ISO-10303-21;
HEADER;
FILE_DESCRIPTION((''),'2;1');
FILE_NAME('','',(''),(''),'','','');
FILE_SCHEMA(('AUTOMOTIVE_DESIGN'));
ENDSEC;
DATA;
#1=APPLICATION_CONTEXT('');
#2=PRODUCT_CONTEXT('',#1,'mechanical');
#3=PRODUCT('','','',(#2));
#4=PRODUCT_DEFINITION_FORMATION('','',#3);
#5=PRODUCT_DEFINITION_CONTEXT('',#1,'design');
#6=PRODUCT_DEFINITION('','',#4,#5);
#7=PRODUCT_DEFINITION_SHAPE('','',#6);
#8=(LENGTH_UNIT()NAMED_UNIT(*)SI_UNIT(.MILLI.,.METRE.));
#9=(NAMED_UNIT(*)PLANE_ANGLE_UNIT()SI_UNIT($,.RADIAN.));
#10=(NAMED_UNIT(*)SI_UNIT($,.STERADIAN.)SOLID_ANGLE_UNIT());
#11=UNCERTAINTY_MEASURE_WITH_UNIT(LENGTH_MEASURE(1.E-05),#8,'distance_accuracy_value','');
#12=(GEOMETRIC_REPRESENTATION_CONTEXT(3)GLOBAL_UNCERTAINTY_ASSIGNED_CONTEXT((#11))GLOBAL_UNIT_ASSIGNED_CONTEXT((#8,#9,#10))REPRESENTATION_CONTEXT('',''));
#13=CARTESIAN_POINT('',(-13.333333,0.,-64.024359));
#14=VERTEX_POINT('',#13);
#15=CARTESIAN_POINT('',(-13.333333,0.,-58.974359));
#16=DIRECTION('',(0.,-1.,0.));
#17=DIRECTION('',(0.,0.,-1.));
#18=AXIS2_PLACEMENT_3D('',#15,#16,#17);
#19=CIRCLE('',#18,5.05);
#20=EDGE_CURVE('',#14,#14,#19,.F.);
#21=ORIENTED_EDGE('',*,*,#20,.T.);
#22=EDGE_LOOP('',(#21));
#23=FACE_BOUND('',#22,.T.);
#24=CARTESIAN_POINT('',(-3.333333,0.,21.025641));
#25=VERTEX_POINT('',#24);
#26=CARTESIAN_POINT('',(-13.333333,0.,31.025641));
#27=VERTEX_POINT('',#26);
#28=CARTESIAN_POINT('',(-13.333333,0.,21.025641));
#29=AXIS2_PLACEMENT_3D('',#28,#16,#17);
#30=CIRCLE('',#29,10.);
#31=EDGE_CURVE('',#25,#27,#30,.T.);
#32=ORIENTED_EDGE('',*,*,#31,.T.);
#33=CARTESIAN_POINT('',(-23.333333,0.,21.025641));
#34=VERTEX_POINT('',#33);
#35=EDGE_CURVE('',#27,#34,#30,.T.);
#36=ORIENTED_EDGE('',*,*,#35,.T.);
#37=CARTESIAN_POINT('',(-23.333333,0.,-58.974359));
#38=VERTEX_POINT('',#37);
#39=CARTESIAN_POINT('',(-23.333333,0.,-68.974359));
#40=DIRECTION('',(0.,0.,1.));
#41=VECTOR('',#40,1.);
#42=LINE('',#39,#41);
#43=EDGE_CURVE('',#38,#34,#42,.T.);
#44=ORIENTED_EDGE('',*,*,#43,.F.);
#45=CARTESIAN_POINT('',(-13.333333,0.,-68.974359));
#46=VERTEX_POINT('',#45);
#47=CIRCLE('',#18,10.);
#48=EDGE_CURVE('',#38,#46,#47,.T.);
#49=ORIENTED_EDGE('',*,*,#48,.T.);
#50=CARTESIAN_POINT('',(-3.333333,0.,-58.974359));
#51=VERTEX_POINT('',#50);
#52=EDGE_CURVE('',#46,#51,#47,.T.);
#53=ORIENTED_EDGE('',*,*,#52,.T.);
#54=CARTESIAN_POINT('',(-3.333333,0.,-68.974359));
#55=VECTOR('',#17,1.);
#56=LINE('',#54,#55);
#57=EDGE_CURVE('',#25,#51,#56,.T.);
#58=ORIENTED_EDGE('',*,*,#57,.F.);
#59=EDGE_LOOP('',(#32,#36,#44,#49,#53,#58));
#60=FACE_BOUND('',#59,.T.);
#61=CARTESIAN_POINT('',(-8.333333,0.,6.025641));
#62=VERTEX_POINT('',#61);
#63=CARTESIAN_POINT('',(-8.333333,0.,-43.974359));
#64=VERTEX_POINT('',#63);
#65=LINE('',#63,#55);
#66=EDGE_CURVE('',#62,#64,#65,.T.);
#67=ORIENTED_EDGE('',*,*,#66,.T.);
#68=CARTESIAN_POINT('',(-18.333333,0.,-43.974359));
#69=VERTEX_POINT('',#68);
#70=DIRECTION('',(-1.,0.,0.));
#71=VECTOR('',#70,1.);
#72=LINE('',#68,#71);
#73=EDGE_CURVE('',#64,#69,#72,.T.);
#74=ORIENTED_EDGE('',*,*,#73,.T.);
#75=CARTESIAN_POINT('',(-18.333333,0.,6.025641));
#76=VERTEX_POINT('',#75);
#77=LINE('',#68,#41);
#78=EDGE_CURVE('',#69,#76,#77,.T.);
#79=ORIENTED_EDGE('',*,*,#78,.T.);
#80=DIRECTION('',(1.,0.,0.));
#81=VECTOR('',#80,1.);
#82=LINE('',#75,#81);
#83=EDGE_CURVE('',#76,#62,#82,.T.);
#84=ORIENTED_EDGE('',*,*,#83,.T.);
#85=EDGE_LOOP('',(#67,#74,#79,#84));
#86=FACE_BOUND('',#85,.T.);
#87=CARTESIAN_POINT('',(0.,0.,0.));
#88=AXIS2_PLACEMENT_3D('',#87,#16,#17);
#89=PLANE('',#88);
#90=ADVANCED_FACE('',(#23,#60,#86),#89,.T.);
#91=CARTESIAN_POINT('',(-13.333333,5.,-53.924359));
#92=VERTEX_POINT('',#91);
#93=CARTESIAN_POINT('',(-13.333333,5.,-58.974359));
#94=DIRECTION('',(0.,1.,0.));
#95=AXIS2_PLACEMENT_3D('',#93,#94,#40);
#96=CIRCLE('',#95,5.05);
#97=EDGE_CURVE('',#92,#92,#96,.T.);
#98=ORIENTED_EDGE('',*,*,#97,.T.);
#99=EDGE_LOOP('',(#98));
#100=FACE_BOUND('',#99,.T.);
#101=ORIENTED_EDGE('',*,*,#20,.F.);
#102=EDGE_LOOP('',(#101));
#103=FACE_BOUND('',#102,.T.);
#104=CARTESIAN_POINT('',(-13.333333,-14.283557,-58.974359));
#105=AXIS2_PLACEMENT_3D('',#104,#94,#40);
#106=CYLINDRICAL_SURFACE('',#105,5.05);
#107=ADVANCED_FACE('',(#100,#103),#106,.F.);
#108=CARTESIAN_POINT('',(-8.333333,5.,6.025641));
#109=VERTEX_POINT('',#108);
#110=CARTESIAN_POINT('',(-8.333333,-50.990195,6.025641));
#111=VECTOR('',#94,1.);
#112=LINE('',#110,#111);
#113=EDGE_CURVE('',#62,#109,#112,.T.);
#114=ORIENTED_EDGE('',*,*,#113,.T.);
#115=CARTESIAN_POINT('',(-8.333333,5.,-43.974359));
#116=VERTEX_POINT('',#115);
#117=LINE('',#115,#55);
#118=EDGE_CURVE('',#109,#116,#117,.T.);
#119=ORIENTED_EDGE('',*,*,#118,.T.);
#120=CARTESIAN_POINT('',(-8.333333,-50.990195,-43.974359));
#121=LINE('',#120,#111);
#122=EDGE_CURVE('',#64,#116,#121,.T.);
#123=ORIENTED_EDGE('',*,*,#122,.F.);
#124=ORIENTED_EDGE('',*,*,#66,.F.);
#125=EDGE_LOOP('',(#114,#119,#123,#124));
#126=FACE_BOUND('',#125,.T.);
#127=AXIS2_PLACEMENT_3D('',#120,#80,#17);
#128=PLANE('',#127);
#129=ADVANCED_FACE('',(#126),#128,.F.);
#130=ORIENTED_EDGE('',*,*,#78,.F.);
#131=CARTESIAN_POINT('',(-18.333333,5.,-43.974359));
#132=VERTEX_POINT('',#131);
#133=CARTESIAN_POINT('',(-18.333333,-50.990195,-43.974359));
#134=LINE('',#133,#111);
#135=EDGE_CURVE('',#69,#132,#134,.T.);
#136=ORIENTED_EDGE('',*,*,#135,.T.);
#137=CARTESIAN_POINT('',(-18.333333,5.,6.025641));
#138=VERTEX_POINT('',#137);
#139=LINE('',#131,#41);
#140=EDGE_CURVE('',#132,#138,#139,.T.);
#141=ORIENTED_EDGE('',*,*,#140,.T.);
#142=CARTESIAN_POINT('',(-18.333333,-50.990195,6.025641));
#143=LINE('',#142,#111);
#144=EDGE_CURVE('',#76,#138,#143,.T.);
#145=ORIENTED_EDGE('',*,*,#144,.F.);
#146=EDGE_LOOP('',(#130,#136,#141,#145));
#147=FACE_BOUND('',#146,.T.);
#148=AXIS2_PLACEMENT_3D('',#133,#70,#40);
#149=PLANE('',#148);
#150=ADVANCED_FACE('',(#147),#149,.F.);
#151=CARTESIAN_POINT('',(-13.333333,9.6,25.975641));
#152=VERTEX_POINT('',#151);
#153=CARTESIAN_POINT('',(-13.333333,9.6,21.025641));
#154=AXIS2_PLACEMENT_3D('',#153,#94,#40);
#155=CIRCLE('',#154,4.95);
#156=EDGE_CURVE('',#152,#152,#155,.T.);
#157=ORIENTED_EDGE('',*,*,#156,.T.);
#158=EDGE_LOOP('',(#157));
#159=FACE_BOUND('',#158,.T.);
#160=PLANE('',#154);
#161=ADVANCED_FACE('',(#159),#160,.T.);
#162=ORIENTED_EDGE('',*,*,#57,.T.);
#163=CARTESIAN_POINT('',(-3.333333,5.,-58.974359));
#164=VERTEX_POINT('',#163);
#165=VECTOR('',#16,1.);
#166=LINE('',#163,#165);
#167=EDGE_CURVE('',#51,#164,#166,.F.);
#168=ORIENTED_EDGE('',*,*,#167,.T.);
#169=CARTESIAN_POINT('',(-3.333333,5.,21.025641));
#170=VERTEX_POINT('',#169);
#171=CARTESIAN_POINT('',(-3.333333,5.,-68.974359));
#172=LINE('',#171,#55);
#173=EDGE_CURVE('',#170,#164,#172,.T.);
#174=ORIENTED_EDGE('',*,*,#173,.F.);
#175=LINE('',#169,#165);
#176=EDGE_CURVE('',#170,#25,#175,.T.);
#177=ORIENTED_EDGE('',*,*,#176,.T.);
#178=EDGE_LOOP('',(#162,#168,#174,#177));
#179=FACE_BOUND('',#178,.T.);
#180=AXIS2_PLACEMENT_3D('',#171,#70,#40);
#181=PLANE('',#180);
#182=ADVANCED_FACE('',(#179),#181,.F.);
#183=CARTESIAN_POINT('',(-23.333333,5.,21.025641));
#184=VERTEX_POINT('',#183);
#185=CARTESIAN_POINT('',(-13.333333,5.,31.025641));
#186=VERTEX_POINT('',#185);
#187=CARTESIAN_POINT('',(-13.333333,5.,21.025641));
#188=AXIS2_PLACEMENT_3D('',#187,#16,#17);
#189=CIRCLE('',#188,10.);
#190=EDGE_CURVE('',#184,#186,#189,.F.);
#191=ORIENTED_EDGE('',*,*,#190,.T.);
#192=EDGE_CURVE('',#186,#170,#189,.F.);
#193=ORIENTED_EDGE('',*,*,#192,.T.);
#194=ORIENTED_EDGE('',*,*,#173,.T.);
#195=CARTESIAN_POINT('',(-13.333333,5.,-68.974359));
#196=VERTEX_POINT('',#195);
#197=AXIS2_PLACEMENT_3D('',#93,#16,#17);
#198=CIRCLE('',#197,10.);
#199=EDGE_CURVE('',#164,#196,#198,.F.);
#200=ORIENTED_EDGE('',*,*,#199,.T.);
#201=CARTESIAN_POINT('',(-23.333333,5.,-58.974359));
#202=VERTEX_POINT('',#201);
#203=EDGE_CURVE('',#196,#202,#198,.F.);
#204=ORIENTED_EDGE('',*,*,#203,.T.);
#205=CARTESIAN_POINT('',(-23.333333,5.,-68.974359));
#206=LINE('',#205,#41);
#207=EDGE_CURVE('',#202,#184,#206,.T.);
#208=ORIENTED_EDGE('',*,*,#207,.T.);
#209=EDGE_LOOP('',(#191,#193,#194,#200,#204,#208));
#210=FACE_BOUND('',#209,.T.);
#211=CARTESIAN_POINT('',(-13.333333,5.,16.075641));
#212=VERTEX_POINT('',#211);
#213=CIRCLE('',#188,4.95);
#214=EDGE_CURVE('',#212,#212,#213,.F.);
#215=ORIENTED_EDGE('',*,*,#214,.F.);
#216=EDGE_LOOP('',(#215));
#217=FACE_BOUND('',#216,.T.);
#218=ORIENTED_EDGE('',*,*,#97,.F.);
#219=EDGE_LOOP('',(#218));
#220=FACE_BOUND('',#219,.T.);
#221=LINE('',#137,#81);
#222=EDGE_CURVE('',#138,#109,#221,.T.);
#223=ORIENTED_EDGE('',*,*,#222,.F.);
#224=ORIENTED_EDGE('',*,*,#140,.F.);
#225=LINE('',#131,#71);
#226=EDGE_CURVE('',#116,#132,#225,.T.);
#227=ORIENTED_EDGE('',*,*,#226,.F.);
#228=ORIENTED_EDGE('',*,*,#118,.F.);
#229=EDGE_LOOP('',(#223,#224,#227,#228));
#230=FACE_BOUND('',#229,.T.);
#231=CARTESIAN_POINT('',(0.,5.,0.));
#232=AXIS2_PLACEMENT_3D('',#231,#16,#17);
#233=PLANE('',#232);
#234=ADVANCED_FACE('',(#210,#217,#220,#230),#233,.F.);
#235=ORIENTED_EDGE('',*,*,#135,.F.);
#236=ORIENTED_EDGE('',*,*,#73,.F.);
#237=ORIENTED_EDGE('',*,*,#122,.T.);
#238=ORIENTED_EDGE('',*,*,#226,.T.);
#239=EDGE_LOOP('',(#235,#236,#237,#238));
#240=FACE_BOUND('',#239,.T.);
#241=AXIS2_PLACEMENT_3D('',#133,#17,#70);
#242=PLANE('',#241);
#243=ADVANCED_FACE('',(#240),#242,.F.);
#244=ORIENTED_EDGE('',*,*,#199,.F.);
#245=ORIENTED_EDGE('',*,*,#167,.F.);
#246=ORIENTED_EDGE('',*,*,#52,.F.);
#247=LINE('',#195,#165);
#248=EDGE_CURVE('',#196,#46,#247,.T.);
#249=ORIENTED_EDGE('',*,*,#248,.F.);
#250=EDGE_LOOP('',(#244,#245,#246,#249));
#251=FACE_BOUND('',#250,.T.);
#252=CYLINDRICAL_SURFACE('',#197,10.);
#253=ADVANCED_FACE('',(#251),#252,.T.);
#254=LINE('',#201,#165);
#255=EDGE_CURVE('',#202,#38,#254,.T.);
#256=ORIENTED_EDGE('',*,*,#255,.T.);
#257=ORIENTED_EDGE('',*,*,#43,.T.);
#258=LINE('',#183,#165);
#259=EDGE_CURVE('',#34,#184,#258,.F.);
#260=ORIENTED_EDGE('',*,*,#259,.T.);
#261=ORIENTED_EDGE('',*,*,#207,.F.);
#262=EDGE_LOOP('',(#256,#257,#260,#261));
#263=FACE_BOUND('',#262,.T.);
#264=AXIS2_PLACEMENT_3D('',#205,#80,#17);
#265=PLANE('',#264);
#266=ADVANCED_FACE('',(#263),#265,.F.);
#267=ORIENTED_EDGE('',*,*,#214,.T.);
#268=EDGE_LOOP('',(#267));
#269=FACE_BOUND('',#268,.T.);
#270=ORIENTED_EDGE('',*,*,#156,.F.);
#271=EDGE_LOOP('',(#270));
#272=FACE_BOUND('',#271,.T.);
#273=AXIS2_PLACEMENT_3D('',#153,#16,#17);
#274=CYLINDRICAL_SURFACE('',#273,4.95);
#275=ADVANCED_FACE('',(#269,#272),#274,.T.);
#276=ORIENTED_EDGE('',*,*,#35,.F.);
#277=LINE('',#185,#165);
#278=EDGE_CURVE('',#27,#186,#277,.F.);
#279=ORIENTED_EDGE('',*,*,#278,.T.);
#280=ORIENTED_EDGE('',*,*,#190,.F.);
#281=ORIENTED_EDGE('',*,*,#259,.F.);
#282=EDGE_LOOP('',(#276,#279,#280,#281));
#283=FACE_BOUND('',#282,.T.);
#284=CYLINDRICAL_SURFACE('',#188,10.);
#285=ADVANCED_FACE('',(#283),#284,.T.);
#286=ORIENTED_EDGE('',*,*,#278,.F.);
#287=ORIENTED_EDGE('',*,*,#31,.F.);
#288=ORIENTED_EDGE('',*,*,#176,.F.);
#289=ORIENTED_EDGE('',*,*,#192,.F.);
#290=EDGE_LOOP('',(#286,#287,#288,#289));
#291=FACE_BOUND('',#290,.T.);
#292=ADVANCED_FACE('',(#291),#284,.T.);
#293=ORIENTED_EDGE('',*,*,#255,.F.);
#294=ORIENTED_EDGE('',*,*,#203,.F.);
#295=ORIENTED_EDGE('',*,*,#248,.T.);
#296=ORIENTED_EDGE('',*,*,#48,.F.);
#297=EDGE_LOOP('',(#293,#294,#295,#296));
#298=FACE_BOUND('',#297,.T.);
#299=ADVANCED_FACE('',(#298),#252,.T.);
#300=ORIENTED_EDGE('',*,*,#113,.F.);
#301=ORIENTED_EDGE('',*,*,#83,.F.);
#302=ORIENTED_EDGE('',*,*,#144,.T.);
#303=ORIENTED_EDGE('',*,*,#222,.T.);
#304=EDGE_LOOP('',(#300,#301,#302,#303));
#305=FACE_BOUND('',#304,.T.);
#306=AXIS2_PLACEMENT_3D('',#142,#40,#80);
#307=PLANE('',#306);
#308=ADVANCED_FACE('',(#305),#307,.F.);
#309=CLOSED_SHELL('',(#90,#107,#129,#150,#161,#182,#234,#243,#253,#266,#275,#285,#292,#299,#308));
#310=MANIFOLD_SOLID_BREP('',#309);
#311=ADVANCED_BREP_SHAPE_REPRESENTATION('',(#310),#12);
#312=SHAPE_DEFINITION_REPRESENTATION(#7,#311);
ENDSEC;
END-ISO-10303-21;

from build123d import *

# Parameters (mm, degrees)
SKETCH1_W           = 20
SKETCH1_H           = 100
BOSS_EXTRUDE1_DEPTH = 5
FILLET1_R           = 10
SKETCH2_R           = 4.95
BOSS_EXTRUDE2_DEPTH = 4.6
SKETCH2_4_R         = 5.05
CUT_EXTRUDE1_DEPTH  = 5
SKETCH4_W           = 10
SKETCH4_H           = 50
CUT_EXTRUDE2_DEPTH  = 5


with BuildPart() as part:
    # Sketch1 → Boss-Extrude1 (new body)
    with BuildSketch(Plane(origin=(0, 0, 0), x_dir=(1, 0, 0), z_dir=(0, 1, 0))):
        with Locations((-13.333333333, 18.974358974)):
            Rectangle(SKETCH1_W, SKETCH1_H)
    extrude(amount=BOSS_EXTRUDE1_DEPTH)

    # Fillet1
    fillet1_edges = [part.edges().sort_by_distance(p)[0] for p in [
        (-23.333333333, 2.5, -68.974358974),
        (-3.333333333, 2.5, -68.974358974),
        (-23.333333333, 2.5, 31.025641026),
        (-3.333333333, 2.5, 31.025641026),
    ]]
    fillet(fillet1_edges, radius=FILLET1_R - 0.0001)  # a hair under: the kernel refuses the full size

    # Sketch2 → Boss-Extrude2 (add)
    with BuildSketch(Plane(origin=(0, 5, 0), x_dir=(1, 0, 0), z_dir=(0, 1, 0))):
        with Locations(Location((-13.333333333, -21.025641026, 0), (0, 0, 90))):
            Circle(SKETCH2_R)
    extrude(amount=BOSS_EXTRUDE2_DEPTH)

    # Sketch2<4> → Cut-Extrude1 (cut)
    with BuildSketch(Plane(origin=(0, 5, 0), x_dir=(1, 0, 0), z_dir=(0, 1, 0))):
        with Locations(Location((-13.333333333, 58.974358974, 0), (0, 0, 270))):
            Circle(SKETCH2_4_R)
    extrude(amount=-CUT_EXTRUDE1_DEPTH, mode=Mode.SUBTRACT)

    # Sketch4 → Cut-Extrude2 (cut)
    with BuildSketch(Plane(origin=(0, 5, 0), x_dir=(1, 0, 0), z_dir=(0, 1, 0))):
        with Locations((-13.333333333, 18.974358974)):
            Rectangle(SKETCH4_W, SKETCH4_H)
    extrude(amount=-CUT_EXTRUDE2_DEPTH, mode=Mode.SUBTRACT)


solid = part.part
